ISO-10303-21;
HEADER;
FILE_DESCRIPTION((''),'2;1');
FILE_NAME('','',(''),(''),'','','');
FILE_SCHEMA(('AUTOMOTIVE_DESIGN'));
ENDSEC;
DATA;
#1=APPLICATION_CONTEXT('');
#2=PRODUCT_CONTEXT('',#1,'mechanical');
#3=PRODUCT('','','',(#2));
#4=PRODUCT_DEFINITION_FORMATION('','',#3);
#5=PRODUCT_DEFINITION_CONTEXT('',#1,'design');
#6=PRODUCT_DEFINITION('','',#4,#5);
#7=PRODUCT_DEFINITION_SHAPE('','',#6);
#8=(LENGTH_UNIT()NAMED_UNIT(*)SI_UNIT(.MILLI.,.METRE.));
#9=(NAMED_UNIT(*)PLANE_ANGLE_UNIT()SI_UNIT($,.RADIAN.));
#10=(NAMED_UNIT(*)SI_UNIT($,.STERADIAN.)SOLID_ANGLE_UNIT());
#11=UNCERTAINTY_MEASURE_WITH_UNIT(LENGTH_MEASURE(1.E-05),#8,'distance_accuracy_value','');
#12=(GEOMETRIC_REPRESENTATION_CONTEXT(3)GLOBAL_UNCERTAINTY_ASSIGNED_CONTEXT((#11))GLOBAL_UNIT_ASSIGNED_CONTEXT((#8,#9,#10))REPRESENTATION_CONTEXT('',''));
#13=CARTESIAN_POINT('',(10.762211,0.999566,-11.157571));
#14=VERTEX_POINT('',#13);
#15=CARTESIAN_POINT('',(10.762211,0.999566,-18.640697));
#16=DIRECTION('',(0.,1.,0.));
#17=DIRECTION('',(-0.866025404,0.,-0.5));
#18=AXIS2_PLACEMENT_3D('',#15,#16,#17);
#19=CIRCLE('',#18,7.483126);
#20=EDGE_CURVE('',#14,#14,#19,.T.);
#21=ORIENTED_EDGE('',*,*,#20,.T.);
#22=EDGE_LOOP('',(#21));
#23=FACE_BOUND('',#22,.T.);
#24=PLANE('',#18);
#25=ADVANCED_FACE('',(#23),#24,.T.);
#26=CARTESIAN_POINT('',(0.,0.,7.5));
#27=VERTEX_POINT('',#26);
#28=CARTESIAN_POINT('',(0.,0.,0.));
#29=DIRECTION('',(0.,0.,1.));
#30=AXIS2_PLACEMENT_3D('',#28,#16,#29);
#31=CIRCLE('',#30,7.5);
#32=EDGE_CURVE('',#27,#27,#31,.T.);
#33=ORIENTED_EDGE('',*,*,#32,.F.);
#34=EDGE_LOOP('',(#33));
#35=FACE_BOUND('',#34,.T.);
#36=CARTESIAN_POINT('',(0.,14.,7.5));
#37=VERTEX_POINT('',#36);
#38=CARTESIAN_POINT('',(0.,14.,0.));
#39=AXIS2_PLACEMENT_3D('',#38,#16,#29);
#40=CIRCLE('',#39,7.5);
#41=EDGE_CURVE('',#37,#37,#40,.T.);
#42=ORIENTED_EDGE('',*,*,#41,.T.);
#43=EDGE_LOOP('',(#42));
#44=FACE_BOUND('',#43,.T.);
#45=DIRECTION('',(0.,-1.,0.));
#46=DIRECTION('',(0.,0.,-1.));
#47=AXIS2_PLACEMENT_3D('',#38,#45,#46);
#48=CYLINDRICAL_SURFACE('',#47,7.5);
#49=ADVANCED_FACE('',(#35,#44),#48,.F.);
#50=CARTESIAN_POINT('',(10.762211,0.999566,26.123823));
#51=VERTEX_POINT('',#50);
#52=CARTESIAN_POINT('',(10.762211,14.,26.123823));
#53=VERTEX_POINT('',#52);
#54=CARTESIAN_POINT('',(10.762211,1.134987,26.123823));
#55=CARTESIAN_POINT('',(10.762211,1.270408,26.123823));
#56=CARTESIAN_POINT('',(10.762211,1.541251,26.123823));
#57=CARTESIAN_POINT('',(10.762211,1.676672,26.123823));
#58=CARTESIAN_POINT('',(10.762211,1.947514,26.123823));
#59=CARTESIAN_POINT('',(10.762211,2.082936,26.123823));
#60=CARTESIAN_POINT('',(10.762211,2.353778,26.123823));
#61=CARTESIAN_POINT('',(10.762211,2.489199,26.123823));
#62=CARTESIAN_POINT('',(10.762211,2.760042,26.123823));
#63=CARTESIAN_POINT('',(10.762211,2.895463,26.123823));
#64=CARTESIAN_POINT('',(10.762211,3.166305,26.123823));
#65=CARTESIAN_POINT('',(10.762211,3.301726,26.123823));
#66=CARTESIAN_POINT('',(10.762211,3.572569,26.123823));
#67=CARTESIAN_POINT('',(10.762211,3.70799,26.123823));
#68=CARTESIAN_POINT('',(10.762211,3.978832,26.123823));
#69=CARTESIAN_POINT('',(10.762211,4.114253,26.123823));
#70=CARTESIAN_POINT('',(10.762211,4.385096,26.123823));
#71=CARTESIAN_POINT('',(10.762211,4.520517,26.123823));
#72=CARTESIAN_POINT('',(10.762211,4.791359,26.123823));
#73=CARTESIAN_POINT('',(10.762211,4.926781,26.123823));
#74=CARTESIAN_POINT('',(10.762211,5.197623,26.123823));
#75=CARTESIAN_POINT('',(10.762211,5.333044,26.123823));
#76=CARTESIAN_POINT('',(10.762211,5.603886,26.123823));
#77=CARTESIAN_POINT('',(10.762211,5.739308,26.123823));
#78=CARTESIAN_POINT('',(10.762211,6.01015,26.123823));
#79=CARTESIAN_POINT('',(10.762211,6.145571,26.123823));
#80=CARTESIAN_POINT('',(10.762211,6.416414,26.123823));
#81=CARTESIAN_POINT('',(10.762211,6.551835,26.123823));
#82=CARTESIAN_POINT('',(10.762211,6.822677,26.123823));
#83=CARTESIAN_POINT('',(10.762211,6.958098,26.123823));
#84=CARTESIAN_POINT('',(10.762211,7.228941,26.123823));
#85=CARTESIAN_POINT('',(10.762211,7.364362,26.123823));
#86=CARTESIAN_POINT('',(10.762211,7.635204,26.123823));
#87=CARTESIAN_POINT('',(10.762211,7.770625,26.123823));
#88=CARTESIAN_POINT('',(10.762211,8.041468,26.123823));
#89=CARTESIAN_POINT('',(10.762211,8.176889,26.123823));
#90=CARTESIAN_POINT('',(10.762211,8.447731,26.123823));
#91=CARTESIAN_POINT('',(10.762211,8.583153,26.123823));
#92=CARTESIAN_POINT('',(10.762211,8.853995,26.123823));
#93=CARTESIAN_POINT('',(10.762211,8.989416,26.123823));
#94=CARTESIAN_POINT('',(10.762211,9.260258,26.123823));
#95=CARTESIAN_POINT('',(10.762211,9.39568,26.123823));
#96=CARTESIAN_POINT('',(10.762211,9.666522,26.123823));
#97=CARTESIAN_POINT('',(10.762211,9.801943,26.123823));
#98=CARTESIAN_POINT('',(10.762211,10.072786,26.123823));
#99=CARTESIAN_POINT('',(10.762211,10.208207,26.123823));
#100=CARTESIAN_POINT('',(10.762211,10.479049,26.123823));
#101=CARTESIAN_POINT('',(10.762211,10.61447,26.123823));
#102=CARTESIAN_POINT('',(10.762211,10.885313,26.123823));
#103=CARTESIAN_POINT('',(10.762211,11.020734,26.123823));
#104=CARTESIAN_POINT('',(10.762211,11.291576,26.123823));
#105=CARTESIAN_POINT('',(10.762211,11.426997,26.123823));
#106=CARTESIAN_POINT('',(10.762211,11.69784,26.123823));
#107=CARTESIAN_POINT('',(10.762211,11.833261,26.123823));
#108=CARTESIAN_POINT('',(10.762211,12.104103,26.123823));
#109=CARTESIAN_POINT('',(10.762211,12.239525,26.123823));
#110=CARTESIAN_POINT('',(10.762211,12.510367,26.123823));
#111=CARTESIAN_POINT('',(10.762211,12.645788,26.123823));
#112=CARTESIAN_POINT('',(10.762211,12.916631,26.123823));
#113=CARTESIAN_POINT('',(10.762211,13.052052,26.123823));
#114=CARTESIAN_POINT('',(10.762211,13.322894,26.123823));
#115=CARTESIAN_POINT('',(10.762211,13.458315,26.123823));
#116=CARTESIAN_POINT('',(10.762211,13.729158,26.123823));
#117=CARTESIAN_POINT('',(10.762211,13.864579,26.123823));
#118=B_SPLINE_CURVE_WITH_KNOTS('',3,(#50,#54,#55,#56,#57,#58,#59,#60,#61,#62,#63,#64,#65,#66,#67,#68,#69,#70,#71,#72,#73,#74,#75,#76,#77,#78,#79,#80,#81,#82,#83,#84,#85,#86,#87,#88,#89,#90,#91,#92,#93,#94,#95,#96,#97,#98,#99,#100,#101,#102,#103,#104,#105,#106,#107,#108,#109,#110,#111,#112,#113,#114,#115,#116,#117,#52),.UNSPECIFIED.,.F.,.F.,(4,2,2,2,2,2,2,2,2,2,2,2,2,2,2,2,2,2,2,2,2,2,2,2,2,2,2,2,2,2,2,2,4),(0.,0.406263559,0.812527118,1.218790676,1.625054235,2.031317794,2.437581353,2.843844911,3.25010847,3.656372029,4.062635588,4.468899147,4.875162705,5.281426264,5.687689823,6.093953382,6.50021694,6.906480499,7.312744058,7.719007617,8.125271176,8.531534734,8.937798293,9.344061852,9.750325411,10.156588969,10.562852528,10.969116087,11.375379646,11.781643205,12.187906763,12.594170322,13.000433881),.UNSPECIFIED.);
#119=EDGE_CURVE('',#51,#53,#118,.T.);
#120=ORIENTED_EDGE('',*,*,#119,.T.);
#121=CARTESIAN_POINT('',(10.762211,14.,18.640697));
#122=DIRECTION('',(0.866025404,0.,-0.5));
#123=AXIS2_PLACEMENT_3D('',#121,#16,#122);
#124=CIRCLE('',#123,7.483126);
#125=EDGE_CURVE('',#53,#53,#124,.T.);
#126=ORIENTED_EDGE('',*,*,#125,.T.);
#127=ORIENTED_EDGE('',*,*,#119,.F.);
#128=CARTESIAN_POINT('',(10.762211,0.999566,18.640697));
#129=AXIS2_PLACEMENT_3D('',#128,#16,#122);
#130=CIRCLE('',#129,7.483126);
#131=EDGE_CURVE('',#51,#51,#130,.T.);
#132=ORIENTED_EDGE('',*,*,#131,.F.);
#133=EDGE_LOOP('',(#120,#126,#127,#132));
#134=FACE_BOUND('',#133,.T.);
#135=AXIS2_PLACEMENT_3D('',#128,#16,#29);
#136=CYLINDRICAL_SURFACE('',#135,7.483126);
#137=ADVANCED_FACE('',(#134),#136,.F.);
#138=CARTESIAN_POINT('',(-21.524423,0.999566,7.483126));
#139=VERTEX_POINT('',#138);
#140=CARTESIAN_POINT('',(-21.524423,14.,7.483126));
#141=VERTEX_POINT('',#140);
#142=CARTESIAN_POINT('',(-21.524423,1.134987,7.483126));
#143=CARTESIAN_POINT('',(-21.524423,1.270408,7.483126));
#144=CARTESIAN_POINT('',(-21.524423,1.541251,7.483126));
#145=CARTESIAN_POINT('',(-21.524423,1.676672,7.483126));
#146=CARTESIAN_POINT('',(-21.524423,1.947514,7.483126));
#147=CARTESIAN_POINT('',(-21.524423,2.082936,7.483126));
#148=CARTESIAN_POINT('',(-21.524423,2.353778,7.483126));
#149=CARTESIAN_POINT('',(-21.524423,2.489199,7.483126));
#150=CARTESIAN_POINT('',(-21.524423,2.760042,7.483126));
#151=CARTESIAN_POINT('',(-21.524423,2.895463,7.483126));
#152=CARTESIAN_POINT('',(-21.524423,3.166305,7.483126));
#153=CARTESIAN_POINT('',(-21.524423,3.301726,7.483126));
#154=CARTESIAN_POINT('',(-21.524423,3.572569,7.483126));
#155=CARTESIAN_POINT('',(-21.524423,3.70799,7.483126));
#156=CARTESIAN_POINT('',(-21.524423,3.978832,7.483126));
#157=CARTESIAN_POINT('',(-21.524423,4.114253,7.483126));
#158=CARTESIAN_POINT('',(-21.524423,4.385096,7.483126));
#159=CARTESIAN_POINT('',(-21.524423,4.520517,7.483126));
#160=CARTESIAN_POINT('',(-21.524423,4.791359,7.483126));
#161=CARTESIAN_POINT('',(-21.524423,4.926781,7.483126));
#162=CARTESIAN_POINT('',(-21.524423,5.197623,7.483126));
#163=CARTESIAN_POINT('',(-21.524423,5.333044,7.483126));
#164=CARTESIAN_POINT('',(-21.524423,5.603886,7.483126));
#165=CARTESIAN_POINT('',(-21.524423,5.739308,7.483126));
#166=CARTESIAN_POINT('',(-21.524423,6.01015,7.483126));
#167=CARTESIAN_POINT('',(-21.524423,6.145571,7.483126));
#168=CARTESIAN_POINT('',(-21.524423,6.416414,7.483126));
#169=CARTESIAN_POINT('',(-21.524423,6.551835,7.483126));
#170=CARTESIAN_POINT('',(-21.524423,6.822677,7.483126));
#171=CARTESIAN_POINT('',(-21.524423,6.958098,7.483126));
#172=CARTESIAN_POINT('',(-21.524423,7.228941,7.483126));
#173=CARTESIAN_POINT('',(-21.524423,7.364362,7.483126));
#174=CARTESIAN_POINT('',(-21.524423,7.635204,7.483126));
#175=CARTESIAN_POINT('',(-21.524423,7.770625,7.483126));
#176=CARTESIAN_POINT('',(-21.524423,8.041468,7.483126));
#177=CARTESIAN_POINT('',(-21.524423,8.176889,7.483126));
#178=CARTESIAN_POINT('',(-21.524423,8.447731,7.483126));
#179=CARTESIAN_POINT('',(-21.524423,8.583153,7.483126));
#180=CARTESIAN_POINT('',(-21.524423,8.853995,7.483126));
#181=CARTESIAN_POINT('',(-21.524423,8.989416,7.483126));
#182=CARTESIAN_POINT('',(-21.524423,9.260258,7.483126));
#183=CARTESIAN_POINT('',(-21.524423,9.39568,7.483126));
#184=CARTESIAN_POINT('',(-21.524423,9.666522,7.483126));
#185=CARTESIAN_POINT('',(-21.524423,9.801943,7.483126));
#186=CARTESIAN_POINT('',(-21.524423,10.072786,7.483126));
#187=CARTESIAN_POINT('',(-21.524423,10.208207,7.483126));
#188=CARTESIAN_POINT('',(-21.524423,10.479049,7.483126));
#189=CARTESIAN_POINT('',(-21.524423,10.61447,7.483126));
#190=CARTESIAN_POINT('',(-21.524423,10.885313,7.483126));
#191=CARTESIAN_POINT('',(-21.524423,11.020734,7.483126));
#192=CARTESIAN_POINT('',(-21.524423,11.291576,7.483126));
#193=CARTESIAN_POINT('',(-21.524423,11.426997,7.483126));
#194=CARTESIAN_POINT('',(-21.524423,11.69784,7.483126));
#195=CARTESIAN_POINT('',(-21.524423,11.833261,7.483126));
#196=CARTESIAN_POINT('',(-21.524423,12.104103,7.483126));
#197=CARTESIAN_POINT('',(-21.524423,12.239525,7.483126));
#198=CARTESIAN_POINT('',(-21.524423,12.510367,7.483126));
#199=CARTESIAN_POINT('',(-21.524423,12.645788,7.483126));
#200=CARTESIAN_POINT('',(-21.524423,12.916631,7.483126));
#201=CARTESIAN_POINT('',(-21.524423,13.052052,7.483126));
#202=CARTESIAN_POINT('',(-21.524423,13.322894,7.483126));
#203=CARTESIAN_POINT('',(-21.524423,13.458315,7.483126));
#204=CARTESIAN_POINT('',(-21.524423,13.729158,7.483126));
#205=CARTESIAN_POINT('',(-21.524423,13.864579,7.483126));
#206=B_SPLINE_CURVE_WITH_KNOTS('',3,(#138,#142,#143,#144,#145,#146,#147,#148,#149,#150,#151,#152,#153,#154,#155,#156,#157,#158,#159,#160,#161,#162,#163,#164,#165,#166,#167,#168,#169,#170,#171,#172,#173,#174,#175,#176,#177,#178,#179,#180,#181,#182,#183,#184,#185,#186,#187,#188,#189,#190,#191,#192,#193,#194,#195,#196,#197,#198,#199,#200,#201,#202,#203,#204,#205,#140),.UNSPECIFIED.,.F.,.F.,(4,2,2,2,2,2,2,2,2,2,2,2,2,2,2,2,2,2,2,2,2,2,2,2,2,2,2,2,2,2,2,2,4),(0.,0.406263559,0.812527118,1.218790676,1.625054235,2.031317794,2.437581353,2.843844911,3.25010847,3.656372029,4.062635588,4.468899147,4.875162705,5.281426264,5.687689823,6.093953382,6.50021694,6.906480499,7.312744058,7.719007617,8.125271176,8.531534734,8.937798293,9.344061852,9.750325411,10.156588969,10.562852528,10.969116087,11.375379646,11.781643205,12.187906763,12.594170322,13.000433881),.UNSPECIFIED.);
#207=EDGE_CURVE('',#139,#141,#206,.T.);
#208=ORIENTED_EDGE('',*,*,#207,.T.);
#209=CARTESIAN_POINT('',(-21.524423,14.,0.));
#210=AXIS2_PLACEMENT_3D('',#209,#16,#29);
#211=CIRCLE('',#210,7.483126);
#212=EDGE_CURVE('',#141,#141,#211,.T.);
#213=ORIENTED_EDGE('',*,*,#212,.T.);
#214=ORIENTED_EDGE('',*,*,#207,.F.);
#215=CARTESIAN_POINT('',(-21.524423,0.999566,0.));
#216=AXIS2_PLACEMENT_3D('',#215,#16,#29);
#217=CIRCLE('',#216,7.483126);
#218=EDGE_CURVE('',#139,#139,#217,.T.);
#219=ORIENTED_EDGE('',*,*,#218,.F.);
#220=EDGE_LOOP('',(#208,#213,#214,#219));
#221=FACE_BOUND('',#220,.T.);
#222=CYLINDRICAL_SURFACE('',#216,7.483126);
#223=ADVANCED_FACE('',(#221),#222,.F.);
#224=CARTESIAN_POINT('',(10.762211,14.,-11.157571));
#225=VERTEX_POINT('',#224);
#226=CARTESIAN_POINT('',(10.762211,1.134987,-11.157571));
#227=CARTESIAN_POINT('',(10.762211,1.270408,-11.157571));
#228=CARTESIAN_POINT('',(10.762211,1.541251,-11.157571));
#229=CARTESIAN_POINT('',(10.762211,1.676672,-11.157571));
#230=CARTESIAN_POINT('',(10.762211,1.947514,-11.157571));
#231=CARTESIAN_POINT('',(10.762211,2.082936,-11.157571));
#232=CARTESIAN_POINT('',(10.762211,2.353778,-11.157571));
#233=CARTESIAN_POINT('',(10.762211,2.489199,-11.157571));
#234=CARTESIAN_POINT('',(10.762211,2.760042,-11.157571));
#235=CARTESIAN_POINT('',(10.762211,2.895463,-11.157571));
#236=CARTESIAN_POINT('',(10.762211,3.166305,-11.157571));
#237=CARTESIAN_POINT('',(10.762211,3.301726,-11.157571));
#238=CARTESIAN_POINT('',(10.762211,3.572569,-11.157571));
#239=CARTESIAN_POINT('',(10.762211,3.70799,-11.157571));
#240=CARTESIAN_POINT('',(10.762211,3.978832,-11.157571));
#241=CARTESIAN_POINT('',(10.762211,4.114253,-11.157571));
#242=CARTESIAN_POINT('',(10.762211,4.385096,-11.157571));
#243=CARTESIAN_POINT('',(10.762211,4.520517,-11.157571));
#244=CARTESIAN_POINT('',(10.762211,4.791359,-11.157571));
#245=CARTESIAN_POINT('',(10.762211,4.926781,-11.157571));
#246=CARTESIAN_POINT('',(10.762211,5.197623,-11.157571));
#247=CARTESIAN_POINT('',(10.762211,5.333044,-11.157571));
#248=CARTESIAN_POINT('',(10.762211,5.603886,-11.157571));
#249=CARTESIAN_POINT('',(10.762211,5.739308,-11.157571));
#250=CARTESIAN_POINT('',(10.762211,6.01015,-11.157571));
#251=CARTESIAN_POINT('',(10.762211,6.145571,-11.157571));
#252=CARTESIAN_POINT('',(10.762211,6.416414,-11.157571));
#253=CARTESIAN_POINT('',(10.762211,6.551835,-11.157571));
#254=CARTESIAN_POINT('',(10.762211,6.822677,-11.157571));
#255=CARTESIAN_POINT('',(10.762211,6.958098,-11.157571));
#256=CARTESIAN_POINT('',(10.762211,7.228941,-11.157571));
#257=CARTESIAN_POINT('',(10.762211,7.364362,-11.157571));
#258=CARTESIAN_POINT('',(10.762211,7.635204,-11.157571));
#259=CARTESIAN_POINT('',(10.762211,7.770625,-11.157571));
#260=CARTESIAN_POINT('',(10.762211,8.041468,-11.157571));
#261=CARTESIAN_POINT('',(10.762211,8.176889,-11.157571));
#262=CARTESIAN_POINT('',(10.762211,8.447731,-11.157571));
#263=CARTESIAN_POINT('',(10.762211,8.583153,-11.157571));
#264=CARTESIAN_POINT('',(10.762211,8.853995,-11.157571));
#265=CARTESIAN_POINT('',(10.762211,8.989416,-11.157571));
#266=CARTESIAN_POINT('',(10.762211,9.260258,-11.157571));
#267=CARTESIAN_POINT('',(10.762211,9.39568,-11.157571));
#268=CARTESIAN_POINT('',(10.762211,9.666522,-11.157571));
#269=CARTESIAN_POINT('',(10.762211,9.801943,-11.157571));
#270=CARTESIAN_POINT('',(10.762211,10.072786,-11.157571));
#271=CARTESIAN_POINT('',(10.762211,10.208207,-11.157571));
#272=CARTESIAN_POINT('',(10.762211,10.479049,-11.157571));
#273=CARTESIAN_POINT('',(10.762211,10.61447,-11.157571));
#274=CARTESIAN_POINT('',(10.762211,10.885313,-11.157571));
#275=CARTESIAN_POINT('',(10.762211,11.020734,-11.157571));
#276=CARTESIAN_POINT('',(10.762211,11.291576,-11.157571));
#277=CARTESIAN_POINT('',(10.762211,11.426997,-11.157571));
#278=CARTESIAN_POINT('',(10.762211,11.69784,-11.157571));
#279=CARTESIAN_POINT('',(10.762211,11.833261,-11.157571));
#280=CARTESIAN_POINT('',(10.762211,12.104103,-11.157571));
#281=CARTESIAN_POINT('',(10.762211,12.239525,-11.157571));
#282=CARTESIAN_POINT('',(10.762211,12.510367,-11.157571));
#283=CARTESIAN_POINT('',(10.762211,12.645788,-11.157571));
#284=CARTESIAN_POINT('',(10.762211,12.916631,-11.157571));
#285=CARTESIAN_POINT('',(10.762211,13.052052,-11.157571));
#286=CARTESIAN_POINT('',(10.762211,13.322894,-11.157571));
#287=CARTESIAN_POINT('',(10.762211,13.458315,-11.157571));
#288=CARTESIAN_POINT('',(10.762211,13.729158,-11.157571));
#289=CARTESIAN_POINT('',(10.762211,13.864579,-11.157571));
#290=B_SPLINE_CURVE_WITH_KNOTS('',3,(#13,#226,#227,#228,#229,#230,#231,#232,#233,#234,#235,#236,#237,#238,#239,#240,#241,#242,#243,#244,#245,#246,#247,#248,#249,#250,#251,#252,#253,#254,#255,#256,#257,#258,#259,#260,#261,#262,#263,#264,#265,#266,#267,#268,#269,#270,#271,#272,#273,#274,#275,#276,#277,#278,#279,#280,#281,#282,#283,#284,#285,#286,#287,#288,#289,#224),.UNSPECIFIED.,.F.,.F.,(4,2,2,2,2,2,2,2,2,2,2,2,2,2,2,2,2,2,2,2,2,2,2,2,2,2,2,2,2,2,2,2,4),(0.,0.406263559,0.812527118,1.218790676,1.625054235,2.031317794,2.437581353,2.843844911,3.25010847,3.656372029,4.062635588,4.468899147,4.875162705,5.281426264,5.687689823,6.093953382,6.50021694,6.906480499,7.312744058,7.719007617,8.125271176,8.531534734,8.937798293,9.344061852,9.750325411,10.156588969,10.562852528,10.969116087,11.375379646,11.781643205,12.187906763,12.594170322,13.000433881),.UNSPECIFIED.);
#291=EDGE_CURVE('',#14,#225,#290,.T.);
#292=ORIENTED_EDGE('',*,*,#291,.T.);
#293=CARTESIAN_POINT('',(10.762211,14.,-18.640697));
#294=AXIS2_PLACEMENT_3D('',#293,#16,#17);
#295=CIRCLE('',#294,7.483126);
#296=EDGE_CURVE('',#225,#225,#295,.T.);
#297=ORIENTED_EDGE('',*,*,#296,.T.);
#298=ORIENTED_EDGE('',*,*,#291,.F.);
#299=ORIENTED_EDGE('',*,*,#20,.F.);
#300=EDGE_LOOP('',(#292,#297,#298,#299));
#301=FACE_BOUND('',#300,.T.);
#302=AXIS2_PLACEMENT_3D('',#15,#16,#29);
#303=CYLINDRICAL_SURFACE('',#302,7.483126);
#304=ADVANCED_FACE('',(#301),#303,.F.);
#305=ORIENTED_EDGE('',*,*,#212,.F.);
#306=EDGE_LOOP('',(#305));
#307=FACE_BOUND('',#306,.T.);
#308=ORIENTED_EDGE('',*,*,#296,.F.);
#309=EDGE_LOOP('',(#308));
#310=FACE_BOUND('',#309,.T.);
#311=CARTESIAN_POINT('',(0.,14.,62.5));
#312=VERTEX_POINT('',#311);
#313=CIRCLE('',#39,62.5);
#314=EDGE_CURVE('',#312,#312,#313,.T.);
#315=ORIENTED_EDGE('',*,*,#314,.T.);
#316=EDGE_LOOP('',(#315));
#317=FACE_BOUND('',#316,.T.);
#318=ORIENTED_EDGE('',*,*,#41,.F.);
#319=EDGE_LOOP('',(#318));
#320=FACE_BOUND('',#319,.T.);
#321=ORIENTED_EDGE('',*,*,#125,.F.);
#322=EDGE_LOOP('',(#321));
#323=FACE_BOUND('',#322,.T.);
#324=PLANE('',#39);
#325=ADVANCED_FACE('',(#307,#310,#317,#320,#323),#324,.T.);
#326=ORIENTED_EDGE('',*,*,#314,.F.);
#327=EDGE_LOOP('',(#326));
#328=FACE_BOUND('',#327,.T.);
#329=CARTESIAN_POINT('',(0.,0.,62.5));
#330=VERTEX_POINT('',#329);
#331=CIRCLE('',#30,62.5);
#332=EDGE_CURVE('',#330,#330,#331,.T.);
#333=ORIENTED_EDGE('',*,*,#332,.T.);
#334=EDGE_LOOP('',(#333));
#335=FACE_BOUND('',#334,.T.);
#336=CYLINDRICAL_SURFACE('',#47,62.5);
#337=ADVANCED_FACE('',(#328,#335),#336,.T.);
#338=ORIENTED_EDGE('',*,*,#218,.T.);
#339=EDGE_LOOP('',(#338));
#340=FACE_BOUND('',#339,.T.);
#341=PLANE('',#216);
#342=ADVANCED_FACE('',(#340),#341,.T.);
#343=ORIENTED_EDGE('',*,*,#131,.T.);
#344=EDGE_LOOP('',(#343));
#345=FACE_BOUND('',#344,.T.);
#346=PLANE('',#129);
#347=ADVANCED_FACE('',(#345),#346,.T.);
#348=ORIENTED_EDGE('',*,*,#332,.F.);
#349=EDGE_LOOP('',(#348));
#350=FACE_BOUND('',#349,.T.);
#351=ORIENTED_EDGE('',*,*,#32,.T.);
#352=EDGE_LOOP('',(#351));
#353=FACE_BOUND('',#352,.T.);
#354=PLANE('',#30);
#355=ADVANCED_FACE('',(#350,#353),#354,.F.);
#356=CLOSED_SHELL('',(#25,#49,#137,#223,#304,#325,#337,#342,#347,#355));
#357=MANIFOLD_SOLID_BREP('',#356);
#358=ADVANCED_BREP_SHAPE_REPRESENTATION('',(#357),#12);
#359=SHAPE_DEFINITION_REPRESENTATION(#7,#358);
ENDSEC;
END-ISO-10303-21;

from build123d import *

# Parameters (mm, degrees)
SKETCH1_R           = 62.5
BOSS_EXTRUDE1_DEPTH = 14
SKETCH2_R           = 7.5
CUT_EXTRUDE1_DEPTH  = 90.49022293
SKETCH3_R           = 7.483126217
CUT_EXTRUDE2_DEPTH  = 13.000433881
CIRPATTERN1_COUNT   = 3


with BuildPart() as part:
    # Sketch1 → Boss-Extrude1 (new body)
    with BuildSketch(Plane(origin=(0, 0, 0), x_dir=(1, 0, 0), z_dir=(0, 1, 0))):
        Circle(SKETCH1_R)
    extrude(amount=BOSS_EXTRUDE1_DEPTH)

    # Sketch2 → Cut-Extrude1 (cut, through all)
    with BuildSketch(Plane(origin=(0, 0, 0), x_dir=(1, 0, 0), z_dir=(0, 1, 0))):
        Circle(SKETCH2_R)
    extrude(amount=CUT_EXTRUDE1_DEPTH, mode=Mode.SUBTRACT)

    # Sketch3 → Cut-Extrude2 (cut)
    with BuildSketch(Plane(origin=(0, 14, 0), x_dir=(1, 0, 0), z_dir=(0, 1, 0))):
        with Locations((-21.524422903, 0)):
            Circle(SKETCH3_R)
    cut_extrude2 = extrude(amount=-CUT_EXTRUDE2_DEPTH, mode=Mode.SUBTRACT)

    # CirPattern1: Cut-Extrude2 ×3 about axis
    cirpattern1_axis = Axis((0, 0, 0), (0, 1, 0))
    for i in range(1, CIRPATTERN1_COUNT):
        add(cut_extrude2.rotate(cirpattern1_axis, i * 360 / CIRPATTERN1_COUNT), mode=Mode.SUBTRACT)


solid = part.part
